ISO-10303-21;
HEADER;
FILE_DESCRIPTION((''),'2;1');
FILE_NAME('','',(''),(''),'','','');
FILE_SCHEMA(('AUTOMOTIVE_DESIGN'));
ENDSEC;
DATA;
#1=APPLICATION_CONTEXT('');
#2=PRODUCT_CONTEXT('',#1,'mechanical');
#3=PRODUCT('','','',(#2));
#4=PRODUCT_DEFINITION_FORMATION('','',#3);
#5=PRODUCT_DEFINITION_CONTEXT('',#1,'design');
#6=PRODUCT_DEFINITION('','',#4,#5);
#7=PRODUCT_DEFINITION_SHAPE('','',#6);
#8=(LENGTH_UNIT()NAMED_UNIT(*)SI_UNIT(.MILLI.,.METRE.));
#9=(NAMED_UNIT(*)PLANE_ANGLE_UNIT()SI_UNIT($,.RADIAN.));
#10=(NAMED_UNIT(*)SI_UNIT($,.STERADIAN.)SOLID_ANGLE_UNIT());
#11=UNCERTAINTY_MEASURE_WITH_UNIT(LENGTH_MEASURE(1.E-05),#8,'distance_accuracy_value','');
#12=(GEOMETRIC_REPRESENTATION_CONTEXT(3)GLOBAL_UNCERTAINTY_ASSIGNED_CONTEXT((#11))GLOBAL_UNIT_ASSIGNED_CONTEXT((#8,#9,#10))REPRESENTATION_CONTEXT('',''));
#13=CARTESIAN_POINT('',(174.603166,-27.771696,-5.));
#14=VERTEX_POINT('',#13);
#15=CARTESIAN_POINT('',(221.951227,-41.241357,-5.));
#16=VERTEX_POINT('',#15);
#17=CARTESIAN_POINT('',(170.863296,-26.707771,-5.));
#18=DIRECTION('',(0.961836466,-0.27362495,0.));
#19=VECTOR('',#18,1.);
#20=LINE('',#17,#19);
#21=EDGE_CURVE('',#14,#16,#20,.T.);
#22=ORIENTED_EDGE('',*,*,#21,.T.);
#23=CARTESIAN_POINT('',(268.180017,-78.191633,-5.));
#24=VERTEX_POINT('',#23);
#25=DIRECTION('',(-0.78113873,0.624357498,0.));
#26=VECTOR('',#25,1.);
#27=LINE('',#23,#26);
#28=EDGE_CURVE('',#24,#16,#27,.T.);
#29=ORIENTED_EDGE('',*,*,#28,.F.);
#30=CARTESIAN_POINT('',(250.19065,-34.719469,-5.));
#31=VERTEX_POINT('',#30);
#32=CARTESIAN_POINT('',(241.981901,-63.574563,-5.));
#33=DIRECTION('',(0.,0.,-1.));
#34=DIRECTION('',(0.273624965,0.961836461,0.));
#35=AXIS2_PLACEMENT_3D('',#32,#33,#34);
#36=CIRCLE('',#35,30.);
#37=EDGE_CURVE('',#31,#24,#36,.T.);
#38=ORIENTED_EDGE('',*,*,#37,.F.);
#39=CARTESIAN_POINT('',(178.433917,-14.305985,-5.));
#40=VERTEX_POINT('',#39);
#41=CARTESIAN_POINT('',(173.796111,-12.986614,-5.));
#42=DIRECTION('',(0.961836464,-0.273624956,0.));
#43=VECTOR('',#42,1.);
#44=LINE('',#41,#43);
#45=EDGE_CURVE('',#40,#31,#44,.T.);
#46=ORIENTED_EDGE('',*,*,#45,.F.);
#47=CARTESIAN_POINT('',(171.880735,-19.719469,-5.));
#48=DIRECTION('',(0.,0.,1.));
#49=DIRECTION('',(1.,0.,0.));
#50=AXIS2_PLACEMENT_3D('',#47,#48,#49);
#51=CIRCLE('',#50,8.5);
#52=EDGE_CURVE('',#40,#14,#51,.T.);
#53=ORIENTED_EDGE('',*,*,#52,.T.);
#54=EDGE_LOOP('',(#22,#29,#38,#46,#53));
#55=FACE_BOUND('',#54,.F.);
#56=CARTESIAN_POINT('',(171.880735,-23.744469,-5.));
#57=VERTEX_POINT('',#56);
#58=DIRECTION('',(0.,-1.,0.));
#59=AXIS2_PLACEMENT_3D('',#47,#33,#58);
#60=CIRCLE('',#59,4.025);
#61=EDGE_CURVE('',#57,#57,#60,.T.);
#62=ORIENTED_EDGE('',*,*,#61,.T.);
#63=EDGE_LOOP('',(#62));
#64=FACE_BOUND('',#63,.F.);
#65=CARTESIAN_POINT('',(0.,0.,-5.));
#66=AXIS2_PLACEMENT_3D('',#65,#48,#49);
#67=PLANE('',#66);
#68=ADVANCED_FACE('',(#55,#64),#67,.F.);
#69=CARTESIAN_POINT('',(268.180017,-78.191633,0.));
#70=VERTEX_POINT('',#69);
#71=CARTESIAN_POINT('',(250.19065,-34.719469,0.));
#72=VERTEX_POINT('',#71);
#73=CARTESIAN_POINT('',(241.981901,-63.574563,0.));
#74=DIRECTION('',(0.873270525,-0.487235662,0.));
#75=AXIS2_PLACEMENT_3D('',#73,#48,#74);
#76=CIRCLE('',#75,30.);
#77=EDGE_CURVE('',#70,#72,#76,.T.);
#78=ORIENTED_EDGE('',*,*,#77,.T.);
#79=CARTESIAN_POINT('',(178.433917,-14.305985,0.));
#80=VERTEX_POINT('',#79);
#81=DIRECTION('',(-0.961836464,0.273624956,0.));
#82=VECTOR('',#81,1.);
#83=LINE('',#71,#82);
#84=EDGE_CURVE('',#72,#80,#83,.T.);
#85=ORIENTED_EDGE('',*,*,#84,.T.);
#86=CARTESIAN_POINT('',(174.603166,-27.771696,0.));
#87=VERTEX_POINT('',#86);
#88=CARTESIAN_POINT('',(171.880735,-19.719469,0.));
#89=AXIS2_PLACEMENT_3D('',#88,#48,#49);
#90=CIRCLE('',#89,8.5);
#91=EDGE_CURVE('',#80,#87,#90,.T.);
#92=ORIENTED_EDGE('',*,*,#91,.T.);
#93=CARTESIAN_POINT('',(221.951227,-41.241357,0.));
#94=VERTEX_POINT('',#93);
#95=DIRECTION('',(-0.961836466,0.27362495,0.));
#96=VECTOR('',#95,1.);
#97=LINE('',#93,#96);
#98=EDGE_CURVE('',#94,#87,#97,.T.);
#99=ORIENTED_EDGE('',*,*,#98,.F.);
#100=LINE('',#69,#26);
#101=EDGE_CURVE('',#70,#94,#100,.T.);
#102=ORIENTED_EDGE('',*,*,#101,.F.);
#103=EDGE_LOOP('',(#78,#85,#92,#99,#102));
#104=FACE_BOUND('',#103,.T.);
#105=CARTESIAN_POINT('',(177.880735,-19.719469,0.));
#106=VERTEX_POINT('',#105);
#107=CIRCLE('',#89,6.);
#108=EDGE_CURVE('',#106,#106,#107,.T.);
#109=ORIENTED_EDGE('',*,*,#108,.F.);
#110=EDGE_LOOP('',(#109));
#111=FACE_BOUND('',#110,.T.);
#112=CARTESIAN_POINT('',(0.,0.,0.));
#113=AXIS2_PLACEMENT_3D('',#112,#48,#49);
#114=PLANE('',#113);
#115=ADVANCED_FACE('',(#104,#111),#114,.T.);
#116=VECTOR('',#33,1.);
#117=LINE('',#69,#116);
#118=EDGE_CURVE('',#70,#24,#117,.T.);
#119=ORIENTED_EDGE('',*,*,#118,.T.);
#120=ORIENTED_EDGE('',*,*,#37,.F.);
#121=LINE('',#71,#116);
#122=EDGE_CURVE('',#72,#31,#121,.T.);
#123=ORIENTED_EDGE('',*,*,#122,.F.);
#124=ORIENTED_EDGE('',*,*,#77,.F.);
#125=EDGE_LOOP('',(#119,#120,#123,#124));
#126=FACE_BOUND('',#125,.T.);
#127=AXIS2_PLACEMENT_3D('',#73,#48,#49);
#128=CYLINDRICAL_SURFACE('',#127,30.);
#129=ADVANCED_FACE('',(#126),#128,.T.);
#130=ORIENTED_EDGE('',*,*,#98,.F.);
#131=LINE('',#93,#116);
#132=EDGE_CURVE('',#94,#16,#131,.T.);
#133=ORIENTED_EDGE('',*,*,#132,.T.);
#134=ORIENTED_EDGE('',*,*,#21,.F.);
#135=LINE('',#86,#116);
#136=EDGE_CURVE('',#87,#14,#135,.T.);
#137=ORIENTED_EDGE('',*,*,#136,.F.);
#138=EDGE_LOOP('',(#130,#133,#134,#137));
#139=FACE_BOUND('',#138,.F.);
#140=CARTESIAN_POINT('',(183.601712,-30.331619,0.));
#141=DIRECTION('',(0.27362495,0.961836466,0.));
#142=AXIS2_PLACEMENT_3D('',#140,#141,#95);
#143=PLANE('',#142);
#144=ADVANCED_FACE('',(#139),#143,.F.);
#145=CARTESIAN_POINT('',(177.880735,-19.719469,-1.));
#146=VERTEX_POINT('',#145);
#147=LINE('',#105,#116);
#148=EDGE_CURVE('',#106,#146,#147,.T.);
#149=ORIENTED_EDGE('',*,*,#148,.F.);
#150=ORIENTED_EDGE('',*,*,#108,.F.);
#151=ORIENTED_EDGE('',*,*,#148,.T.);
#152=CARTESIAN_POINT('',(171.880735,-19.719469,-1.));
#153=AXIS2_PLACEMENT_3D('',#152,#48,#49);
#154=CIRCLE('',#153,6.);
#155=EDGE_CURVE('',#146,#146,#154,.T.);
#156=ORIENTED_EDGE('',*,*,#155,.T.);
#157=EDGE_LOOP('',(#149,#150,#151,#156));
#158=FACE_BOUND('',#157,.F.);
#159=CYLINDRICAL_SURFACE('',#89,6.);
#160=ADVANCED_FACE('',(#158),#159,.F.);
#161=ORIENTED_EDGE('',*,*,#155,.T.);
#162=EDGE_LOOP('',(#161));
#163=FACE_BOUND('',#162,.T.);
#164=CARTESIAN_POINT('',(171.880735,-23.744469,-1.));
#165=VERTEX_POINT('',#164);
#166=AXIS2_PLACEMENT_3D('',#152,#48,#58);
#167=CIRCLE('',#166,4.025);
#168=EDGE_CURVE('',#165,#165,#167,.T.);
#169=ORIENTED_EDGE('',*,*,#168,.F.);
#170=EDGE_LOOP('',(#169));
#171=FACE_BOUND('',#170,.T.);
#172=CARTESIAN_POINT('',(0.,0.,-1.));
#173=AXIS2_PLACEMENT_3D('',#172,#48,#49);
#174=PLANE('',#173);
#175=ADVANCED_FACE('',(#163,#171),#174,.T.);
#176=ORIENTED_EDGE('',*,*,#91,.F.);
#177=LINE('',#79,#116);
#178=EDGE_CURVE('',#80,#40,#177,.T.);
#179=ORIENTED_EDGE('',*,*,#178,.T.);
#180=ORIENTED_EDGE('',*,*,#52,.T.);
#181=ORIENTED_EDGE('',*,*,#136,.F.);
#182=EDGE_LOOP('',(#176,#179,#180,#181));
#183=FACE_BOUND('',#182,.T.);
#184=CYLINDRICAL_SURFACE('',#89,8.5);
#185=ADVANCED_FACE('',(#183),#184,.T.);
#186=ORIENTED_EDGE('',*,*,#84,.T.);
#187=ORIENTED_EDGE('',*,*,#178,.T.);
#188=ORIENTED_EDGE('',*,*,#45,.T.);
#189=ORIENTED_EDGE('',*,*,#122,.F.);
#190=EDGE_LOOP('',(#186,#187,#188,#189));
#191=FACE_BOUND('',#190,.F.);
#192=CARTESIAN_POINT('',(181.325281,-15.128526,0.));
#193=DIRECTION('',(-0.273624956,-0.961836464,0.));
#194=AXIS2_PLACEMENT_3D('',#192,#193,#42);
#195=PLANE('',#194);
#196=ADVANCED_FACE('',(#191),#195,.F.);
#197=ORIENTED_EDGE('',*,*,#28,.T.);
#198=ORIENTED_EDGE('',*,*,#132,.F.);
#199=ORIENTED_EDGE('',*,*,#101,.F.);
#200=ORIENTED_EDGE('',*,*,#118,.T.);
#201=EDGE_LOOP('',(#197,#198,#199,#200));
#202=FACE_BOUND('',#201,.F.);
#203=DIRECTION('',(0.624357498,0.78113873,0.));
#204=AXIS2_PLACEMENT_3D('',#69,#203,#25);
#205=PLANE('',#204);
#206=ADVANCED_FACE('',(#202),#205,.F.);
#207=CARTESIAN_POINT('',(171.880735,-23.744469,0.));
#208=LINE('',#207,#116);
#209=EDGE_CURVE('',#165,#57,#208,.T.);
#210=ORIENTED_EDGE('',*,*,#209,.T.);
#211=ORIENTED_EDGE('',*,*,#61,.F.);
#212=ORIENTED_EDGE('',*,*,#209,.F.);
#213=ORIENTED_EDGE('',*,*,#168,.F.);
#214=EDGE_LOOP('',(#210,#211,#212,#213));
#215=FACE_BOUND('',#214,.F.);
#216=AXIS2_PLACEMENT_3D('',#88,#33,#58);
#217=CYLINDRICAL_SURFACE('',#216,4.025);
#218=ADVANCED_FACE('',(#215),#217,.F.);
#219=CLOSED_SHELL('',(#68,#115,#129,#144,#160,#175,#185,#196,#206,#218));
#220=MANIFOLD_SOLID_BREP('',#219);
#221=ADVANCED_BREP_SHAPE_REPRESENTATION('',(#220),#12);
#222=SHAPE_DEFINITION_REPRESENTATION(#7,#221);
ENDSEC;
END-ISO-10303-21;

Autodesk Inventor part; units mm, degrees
ref_plane "YZ Plane" through (0, 0, 0) normal (1, 0, 0) x (0, 1, 0)
ref_plane "XZ Plane" through (0, 0, 0) normal (0, 1, 0) x (-1, 0, 0)
ref_plane "XY Plane" through (0, 0, 0) normal (0, 0, 1) x (1, 0, 0)
sketch "スケッチ1" plane through (0, 0, 0) normal (0, 0, 1) x (1, 0, 0)
  line L0 (-101.5, 47.999998) -> (108.5, 47.999998)
  circle A0 centre (111.885049, -19.000002) radius 4
  circle A1 centre (171.880735, -19.719469) radius 4
  circle A2 centre (111.885049, -19.000002) radius 7
  circle A3 centre (171.880735, -19.719469) radius 7
  line L1 (171.880735, -19.719469) -> (111.885049, -19.000002) construction
  line L2 (171.964673, -12.719973) -> (111.968987, -12.000505)
  line L3 (111.801111, -25.999499) -> (171.796797, -26.718966)
  arc A4 (171.796797, -26.718966) -> (171.964673, -12.719973) centre (171.880735, -19.719469) ccw
  arc A5 (111.968987, -12.000505) -> (111.801111, -25.999499) centre (111.885049, -19.000002) ccw
  line L4 (173.796111, -12.986614) -> (250.19065, -34.719469)
  circle A6 centre (241.981901, -63.574563) radius 30
  line L5 (268.180017, -78.191633) -> (221.951227, -41.241357)
  line L6 (221.951227, -41.241357) -> (169.96536, -26.452325)
  line L7 (271.981901, -113.136134) -> (271.981901, -54.819928)
  line L8 (111.885049, -19.000002) -> (111.885049, 40.999998) construction
  line L9 (118.885049, -19.000002) -> (118.885049, 40.999998)
  line L10 (104.885049, 40.999998) -> (104.885049, -19.000002)
  arc A7 (104.885049, -19.000002) -> (118.885049, -19.000002) centre (111.885049, -19.000002) ccw
  arc A8 (118.885049, 40.999998) -> (104.885049, 40.999998) centre (111.885049, 40.999998) ccw
  circle A9 centre (29.431848, 47.237971) radius 30
  line L11 (113.319325, 34.148513) -> (35.578744, 17.874462)
  line L12 (-0.558472, 47.999998) -> (57.548937, 36.777124)
  line L13 (57.548937, 36.777124) -> (110.450773, 47.851484)
  circle A10 centre (113.5, -20.000002) radius 68
  line L14 (321.963533, -82.955067) -> (60.270532, 100.284345)
  line L15 (259.189194, -39.000002) -> (111.885049, -19.000002)
  arc A11 (93.592427, -27.104845) -> (135.370976, -5.924402) centre (95.060351, 21.794105) ccw
  arc A12 (135.370976, -5.924402) -> (135.847591, -3.671647) centre (132.898992, -4.224609) ccw
  arc A13 (135.847591, -3.671647) -> (83.183341, 18.55647) centre (102.157897, -9.989602) ccw
  line L16 (111.885049, -19.000002) -> (112.689188, 40.994609) construction
  line L17 (118.88442, -19.093818) -> (119.688559, 40.900793)
  line L18 (105.689816, 41.088425) -> (104.885678, -18.906186)
  arc A14 (104.885678, -18.906186) -> (118.88442, -19.093818) centre (111.885049, -19.000002) ccw
  arc A15 (119.688559, 40.900793) -> (105.689816, 41.088425) centre (112.689188, 40.994609) ccw
  line L19 (164.994898, 47.999998) -> (164.994898, 25.999998)
  line L20 (164.994898, 25.999998) -> (327.494898, -102.000002)
  circle A16 centre (116.292557, -40.000002) radius 68
  circle A17 centre (-98.885049, -0.000002) radius 67.5
  line L21 (321.363327, -8.500986) -> (-152.668056, 78.49822)
  line L22 (104.889695, -3) -> (104.889695, 0)
  line L23 (104.889695, -3) -> (72.06562, -3)
  line L24 (72.06562, 0) -> (104.889695, 0)
  circle A18 centre (83.376901, -17.5) radius 13.85
  line L25 (178.77046, -28.957215) -> (174.212284, -32.858886)
  line L26 (174.212284, -32.858886) -> (164.880735, -30.20423)
  line L27 (164.880735, -30.20423) -> (164.880735, -19.719469)
  line L28 (169.96536, -26.452325) -> (168.597236, -31.261507)
  line L29 (168.597236, -31.261507) -> (164.880735, -26.636029)
  line L30 (178.880232, -19.803408) -> (178.654717, -38.608867)
  line L31 (165.012544, -21.071485) -> (158.172386, 13.676274)
  circle A19 centre (171.880735, -19.719469) radius 7.5
  point P0 (0, 0)
  point P1 (0, 0)
  point P2 (141.882892, -19.359736)
  point P3 (111.885049, 10.999998)
  point P4 (105.885049, -0.000002)
  point P5 (105.885049, -0.000002)
  point P6 (23.732778, -42.728965)
  point P7 (112.287118, 10.997304)
  point P8 (169.272284, -12.687685)
  point P9 (163.348193, -12.616644)
  point P10 (164.492485, -18.429603)
  point P11 (172.555184, -27.189082)
  point P12 (178.847945, -22.495796)
  point P13 (170.863298, -26.707772)
  dimension "d0" = 8
  dimension "d1" = 8
  dimension "d2" = 3
  dimension "d3" = 3
  dimension "d4" = 60
  dimension "d5" = 14
  dimension "d6" = 14
  dimension "d7" = 60
  dimension "d8" = 14
  dimension "d9" = 60
  dimension "d10" = 14
  dimension "d11" = 6
  dimension "d12" = 35
  dimension "d13" = 13.271
  dimension "d14" = 14
  dimension "d15" = 20
  dimension "d16" = 15
  dimension "d17" = 22
  dimension "d18" = 150
  dimension "d19" = 162.5
  dimension "d20" = 0
  dimension "d21" = 136
  dimension "d22" = 136
  dimension "d23" = 135
  dimension "d24" = 38.2272
  dimension "d25" = 18
  dimension "d26" = 5
  dimension "d27" = 6
  dimension "d28" = 101.823
  dimension "d29" = 101.823
  dimension "d30" = 0.5
extrude "押し出し1" add sketch "スケッチ1" against normal blind 5 contours A10 L15 A16 L6 | L6 L30 L15 A10 | A16 L15 A6 L6 | L6 L15 L30 | L15 L30 A19 L4 A16 A10 | A10 A16 L15 | A6 L15 L20 L5 | A16 A10 L4 L20 A6 L15 | L6 A19 L30 L15 | A16 L4 A10 | A6 L20 L15 | L6 L3 A3 L30 A19 | L30 A3 L4 A19 | L20 L4 A6 | A6 L15 L20 | L15 A6 L20 | A3 | A1
hole "穴1" at (105.885049, -0.000002, 0) at (113.5, -20.000002, 0) at (23.732778, -42.728965, 0) at (116.292557, -40.000002, 0) at (-98.885049, -0.000002, 0) at (171.880735, -19.719469, 0) direction (0, 0, -1) diameter 8.05 depth 12 tip angle 118
sketch "スケッチ2" plane through (0, 0, 0) normal (0, 0, 1) x (1, 0, 0)
  circle A0 centre (171.880735, -19.719469) radius 4.025
  arc A1 (268.180017, -78.191633) -> (250.19065, -34.719469) centre (241.981901, -63.574563) ccw
  line L0 (268.180017, -78.191633) -> (221.951227, -41.241357)
  line L1 (221.951227, -41.241357) -> (170.863298, -26.707772)
  line L2 (170.863298, -26.707772) -> (171.796797, -26.718966)
  arc A2 (173.796111, -12.986614) -> (171.796797, -26.718966) centre (171.880735, -19.719469) ccw
  line L3 (173.796111, -12.986614) -> (250.19065, -34.719469)
  circle A3 centre (171.880735, -19.719469) radius 7
  circle A4 centre (171.880735, -19.719469) radius 8.5
  point P0 (0, 0)
  point P1 (178.433917, -14.305986)
  point P2 (174.603168, -27.771696)
  dimension "d40" = 1.5
extrude "押し出し2" add sketch "スケッチ2" against normal blind 5 contours L3 A2 L2 L1 A4
sketch "スケッチ3" plane through (0, 0, 0) normal (0, 0, 1) x (1, 0, 0)
  circle A0 centre (171.880735, -19.719469) radius 4.025
  arc A1 (268.180017, -78.191633) -> (250.19065, -34.719469) centre (241.981901, -63.574563) ccw
  line L0 (268.180017, -78.191633) -> (221.951227, -41.241357)
  line L1 (221.951227, -41.241357) -> (174.603168, -27.771696)
  arc A2 (178.433917, -14.305986) -> (174.603168, -27.771696) centre (171.880735, -19.719469) ccw
  line L2 (178.433917, -14.305986) -> (250.19065, -34.719469)
  circle A3 centre (171.880735, -19.719469) radius 6
  point P0 (0, 0)
  dimension "d43" = 12
extrude "押し出し3" cut sketch "スケッチ3" against normal blind 1 contours A3
equation "\"d9\" = d7"
equation "\"d29\" = d28"
properties part number "後ろウィング先端"
